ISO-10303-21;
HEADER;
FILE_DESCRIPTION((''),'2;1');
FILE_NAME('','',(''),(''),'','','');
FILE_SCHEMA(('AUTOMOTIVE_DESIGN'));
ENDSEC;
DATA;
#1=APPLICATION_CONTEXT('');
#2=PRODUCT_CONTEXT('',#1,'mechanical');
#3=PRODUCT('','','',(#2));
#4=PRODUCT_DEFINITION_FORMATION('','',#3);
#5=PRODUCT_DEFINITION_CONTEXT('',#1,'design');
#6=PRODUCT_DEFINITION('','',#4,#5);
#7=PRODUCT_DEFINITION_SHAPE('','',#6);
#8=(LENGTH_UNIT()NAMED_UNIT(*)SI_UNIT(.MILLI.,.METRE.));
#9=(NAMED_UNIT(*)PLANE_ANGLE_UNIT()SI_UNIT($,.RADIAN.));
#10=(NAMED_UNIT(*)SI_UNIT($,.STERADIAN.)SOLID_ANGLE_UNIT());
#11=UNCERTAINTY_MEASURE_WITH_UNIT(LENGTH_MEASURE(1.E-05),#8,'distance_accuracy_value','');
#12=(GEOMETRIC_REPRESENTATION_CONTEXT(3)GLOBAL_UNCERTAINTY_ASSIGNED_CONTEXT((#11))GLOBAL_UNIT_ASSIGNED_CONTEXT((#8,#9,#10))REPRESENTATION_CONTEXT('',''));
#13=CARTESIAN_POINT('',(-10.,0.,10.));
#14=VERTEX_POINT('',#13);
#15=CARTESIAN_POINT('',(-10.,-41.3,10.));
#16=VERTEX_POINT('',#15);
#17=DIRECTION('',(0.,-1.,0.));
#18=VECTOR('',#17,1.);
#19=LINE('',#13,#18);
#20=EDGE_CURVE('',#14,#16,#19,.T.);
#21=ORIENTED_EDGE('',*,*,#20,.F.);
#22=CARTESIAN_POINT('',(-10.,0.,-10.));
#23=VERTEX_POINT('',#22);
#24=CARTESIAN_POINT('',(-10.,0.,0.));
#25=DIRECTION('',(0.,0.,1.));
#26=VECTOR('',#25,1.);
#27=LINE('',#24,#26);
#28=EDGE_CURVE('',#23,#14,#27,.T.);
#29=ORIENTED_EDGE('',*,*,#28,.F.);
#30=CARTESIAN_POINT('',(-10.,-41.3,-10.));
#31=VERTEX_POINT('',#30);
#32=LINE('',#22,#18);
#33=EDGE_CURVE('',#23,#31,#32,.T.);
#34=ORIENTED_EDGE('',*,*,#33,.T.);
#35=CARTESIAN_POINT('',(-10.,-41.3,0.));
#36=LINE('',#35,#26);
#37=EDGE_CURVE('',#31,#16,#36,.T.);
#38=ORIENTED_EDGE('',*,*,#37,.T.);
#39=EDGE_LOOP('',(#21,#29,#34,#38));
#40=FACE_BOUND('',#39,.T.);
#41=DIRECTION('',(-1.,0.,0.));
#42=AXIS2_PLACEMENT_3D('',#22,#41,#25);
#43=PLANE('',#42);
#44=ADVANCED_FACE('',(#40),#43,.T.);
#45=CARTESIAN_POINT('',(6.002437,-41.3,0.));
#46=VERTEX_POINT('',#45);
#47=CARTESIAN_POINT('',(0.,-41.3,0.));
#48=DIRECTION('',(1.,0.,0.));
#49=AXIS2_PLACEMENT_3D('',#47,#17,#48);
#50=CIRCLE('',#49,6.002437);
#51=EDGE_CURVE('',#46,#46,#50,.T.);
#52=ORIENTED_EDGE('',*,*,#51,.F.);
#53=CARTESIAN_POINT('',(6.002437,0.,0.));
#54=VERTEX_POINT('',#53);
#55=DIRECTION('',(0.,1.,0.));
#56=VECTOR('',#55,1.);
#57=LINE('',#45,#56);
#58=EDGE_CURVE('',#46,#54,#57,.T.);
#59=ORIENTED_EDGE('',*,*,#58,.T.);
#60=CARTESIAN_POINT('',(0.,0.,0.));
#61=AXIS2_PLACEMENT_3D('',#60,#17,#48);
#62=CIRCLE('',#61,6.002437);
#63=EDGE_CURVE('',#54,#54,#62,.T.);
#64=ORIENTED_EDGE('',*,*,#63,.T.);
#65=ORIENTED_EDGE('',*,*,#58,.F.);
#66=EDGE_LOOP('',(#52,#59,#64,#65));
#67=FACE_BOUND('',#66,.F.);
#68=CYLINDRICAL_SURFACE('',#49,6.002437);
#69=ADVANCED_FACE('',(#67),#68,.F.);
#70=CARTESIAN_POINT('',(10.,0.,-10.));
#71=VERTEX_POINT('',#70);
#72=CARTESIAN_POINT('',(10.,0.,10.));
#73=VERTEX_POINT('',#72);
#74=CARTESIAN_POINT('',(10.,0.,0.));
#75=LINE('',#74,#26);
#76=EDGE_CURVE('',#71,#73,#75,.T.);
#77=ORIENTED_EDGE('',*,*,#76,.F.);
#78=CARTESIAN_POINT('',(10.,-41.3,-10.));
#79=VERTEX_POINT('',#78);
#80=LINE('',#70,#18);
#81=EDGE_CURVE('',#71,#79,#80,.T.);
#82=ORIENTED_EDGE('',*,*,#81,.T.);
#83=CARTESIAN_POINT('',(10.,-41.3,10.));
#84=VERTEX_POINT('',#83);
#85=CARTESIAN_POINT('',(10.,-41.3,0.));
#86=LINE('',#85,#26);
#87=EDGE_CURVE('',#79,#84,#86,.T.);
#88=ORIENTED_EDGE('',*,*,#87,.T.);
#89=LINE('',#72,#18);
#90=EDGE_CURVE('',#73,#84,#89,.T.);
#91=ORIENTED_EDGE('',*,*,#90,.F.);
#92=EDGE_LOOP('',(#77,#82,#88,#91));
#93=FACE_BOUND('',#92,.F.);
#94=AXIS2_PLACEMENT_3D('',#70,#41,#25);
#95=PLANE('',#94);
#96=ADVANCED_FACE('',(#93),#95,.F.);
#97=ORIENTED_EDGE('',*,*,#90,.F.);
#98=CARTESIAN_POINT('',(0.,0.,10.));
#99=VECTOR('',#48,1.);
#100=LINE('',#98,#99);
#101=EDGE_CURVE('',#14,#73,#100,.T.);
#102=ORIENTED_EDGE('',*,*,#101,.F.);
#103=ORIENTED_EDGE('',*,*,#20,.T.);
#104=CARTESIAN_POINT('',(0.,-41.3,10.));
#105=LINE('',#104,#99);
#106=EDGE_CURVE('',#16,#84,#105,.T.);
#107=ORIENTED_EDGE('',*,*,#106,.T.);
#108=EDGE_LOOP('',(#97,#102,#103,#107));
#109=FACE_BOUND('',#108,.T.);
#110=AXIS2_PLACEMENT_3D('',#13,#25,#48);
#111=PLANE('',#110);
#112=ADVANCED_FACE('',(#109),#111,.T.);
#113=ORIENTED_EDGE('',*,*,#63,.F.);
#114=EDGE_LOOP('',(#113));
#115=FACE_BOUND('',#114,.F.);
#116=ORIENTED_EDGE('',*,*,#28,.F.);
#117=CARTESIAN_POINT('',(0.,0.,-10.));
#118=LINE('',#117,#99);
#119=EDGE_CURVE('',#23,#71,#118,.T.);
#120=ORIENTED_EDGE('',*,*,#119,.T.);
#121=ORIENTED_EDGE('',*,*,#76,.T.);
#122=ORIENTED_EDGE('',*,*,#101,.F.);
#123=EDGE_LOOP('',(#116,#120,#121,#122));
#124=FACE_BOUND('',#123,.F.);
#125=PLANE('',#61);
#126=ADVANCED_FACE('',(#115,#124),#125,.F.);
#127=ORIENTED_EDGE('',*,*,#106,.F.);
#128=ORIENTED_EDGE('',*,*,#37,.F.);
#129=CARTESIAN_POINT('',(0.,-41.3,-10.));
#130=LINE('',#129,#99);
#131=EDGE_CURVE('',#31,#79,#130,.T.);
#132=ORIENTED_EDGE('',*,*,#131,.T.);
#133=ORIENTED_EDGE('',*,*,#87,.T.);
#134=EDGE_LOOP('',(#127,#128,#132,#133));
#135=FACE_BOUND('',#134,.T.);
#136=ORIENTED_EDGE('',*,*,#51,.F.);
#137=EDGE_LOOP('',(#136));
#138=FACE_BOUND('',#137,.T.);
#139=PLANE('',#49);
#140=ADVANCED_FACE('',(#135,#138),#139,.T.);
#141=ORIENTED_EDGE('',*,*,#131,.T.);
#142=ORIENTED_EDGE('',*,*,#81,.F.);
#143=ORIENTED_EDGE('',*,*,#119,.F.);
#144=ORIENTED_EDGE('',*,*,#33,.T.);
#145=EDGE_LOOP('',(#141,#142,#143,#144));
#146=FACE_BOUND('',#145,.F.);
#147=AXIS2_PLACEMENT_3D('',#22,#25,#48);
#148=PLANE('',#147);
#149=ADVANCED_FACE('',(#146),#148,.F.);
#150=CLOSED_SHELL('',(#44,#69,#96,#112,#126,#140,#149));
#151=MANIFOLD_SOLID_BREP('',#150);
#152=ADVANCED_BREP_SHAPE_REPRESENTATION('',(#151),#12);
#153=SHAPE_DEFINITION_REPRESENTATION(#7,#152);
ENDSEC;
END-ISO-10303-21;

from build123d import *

# Parameters (mm, degrees)
F0_W     = 20
F0_H     = 20
F1_DEPTH = 41.3
F2_R     = 6.0024367581
F3_DEPTH = 41.301


# Not quite as in the source:
# - a feature of the source that left no trace in its solid (it failed there, or was rolled back) is left out


with BuildPart() as f1:
    # F0 (on Front) → F1 (new body)
    with BuildSketch(Plane.XZ):
        Rectangle(F0_W, F0_H)
    extrude(amount=F1_DEPTH)

    # F2 (on face) → F3 (cut, through all)
    with BuildSketch(Plane.XZ.offset(41.3)):
        Circle(F2_R)
    extrude(amount=-F3_DEPTH, mode=Mode.SUBTRACT)


solid = f1.part
